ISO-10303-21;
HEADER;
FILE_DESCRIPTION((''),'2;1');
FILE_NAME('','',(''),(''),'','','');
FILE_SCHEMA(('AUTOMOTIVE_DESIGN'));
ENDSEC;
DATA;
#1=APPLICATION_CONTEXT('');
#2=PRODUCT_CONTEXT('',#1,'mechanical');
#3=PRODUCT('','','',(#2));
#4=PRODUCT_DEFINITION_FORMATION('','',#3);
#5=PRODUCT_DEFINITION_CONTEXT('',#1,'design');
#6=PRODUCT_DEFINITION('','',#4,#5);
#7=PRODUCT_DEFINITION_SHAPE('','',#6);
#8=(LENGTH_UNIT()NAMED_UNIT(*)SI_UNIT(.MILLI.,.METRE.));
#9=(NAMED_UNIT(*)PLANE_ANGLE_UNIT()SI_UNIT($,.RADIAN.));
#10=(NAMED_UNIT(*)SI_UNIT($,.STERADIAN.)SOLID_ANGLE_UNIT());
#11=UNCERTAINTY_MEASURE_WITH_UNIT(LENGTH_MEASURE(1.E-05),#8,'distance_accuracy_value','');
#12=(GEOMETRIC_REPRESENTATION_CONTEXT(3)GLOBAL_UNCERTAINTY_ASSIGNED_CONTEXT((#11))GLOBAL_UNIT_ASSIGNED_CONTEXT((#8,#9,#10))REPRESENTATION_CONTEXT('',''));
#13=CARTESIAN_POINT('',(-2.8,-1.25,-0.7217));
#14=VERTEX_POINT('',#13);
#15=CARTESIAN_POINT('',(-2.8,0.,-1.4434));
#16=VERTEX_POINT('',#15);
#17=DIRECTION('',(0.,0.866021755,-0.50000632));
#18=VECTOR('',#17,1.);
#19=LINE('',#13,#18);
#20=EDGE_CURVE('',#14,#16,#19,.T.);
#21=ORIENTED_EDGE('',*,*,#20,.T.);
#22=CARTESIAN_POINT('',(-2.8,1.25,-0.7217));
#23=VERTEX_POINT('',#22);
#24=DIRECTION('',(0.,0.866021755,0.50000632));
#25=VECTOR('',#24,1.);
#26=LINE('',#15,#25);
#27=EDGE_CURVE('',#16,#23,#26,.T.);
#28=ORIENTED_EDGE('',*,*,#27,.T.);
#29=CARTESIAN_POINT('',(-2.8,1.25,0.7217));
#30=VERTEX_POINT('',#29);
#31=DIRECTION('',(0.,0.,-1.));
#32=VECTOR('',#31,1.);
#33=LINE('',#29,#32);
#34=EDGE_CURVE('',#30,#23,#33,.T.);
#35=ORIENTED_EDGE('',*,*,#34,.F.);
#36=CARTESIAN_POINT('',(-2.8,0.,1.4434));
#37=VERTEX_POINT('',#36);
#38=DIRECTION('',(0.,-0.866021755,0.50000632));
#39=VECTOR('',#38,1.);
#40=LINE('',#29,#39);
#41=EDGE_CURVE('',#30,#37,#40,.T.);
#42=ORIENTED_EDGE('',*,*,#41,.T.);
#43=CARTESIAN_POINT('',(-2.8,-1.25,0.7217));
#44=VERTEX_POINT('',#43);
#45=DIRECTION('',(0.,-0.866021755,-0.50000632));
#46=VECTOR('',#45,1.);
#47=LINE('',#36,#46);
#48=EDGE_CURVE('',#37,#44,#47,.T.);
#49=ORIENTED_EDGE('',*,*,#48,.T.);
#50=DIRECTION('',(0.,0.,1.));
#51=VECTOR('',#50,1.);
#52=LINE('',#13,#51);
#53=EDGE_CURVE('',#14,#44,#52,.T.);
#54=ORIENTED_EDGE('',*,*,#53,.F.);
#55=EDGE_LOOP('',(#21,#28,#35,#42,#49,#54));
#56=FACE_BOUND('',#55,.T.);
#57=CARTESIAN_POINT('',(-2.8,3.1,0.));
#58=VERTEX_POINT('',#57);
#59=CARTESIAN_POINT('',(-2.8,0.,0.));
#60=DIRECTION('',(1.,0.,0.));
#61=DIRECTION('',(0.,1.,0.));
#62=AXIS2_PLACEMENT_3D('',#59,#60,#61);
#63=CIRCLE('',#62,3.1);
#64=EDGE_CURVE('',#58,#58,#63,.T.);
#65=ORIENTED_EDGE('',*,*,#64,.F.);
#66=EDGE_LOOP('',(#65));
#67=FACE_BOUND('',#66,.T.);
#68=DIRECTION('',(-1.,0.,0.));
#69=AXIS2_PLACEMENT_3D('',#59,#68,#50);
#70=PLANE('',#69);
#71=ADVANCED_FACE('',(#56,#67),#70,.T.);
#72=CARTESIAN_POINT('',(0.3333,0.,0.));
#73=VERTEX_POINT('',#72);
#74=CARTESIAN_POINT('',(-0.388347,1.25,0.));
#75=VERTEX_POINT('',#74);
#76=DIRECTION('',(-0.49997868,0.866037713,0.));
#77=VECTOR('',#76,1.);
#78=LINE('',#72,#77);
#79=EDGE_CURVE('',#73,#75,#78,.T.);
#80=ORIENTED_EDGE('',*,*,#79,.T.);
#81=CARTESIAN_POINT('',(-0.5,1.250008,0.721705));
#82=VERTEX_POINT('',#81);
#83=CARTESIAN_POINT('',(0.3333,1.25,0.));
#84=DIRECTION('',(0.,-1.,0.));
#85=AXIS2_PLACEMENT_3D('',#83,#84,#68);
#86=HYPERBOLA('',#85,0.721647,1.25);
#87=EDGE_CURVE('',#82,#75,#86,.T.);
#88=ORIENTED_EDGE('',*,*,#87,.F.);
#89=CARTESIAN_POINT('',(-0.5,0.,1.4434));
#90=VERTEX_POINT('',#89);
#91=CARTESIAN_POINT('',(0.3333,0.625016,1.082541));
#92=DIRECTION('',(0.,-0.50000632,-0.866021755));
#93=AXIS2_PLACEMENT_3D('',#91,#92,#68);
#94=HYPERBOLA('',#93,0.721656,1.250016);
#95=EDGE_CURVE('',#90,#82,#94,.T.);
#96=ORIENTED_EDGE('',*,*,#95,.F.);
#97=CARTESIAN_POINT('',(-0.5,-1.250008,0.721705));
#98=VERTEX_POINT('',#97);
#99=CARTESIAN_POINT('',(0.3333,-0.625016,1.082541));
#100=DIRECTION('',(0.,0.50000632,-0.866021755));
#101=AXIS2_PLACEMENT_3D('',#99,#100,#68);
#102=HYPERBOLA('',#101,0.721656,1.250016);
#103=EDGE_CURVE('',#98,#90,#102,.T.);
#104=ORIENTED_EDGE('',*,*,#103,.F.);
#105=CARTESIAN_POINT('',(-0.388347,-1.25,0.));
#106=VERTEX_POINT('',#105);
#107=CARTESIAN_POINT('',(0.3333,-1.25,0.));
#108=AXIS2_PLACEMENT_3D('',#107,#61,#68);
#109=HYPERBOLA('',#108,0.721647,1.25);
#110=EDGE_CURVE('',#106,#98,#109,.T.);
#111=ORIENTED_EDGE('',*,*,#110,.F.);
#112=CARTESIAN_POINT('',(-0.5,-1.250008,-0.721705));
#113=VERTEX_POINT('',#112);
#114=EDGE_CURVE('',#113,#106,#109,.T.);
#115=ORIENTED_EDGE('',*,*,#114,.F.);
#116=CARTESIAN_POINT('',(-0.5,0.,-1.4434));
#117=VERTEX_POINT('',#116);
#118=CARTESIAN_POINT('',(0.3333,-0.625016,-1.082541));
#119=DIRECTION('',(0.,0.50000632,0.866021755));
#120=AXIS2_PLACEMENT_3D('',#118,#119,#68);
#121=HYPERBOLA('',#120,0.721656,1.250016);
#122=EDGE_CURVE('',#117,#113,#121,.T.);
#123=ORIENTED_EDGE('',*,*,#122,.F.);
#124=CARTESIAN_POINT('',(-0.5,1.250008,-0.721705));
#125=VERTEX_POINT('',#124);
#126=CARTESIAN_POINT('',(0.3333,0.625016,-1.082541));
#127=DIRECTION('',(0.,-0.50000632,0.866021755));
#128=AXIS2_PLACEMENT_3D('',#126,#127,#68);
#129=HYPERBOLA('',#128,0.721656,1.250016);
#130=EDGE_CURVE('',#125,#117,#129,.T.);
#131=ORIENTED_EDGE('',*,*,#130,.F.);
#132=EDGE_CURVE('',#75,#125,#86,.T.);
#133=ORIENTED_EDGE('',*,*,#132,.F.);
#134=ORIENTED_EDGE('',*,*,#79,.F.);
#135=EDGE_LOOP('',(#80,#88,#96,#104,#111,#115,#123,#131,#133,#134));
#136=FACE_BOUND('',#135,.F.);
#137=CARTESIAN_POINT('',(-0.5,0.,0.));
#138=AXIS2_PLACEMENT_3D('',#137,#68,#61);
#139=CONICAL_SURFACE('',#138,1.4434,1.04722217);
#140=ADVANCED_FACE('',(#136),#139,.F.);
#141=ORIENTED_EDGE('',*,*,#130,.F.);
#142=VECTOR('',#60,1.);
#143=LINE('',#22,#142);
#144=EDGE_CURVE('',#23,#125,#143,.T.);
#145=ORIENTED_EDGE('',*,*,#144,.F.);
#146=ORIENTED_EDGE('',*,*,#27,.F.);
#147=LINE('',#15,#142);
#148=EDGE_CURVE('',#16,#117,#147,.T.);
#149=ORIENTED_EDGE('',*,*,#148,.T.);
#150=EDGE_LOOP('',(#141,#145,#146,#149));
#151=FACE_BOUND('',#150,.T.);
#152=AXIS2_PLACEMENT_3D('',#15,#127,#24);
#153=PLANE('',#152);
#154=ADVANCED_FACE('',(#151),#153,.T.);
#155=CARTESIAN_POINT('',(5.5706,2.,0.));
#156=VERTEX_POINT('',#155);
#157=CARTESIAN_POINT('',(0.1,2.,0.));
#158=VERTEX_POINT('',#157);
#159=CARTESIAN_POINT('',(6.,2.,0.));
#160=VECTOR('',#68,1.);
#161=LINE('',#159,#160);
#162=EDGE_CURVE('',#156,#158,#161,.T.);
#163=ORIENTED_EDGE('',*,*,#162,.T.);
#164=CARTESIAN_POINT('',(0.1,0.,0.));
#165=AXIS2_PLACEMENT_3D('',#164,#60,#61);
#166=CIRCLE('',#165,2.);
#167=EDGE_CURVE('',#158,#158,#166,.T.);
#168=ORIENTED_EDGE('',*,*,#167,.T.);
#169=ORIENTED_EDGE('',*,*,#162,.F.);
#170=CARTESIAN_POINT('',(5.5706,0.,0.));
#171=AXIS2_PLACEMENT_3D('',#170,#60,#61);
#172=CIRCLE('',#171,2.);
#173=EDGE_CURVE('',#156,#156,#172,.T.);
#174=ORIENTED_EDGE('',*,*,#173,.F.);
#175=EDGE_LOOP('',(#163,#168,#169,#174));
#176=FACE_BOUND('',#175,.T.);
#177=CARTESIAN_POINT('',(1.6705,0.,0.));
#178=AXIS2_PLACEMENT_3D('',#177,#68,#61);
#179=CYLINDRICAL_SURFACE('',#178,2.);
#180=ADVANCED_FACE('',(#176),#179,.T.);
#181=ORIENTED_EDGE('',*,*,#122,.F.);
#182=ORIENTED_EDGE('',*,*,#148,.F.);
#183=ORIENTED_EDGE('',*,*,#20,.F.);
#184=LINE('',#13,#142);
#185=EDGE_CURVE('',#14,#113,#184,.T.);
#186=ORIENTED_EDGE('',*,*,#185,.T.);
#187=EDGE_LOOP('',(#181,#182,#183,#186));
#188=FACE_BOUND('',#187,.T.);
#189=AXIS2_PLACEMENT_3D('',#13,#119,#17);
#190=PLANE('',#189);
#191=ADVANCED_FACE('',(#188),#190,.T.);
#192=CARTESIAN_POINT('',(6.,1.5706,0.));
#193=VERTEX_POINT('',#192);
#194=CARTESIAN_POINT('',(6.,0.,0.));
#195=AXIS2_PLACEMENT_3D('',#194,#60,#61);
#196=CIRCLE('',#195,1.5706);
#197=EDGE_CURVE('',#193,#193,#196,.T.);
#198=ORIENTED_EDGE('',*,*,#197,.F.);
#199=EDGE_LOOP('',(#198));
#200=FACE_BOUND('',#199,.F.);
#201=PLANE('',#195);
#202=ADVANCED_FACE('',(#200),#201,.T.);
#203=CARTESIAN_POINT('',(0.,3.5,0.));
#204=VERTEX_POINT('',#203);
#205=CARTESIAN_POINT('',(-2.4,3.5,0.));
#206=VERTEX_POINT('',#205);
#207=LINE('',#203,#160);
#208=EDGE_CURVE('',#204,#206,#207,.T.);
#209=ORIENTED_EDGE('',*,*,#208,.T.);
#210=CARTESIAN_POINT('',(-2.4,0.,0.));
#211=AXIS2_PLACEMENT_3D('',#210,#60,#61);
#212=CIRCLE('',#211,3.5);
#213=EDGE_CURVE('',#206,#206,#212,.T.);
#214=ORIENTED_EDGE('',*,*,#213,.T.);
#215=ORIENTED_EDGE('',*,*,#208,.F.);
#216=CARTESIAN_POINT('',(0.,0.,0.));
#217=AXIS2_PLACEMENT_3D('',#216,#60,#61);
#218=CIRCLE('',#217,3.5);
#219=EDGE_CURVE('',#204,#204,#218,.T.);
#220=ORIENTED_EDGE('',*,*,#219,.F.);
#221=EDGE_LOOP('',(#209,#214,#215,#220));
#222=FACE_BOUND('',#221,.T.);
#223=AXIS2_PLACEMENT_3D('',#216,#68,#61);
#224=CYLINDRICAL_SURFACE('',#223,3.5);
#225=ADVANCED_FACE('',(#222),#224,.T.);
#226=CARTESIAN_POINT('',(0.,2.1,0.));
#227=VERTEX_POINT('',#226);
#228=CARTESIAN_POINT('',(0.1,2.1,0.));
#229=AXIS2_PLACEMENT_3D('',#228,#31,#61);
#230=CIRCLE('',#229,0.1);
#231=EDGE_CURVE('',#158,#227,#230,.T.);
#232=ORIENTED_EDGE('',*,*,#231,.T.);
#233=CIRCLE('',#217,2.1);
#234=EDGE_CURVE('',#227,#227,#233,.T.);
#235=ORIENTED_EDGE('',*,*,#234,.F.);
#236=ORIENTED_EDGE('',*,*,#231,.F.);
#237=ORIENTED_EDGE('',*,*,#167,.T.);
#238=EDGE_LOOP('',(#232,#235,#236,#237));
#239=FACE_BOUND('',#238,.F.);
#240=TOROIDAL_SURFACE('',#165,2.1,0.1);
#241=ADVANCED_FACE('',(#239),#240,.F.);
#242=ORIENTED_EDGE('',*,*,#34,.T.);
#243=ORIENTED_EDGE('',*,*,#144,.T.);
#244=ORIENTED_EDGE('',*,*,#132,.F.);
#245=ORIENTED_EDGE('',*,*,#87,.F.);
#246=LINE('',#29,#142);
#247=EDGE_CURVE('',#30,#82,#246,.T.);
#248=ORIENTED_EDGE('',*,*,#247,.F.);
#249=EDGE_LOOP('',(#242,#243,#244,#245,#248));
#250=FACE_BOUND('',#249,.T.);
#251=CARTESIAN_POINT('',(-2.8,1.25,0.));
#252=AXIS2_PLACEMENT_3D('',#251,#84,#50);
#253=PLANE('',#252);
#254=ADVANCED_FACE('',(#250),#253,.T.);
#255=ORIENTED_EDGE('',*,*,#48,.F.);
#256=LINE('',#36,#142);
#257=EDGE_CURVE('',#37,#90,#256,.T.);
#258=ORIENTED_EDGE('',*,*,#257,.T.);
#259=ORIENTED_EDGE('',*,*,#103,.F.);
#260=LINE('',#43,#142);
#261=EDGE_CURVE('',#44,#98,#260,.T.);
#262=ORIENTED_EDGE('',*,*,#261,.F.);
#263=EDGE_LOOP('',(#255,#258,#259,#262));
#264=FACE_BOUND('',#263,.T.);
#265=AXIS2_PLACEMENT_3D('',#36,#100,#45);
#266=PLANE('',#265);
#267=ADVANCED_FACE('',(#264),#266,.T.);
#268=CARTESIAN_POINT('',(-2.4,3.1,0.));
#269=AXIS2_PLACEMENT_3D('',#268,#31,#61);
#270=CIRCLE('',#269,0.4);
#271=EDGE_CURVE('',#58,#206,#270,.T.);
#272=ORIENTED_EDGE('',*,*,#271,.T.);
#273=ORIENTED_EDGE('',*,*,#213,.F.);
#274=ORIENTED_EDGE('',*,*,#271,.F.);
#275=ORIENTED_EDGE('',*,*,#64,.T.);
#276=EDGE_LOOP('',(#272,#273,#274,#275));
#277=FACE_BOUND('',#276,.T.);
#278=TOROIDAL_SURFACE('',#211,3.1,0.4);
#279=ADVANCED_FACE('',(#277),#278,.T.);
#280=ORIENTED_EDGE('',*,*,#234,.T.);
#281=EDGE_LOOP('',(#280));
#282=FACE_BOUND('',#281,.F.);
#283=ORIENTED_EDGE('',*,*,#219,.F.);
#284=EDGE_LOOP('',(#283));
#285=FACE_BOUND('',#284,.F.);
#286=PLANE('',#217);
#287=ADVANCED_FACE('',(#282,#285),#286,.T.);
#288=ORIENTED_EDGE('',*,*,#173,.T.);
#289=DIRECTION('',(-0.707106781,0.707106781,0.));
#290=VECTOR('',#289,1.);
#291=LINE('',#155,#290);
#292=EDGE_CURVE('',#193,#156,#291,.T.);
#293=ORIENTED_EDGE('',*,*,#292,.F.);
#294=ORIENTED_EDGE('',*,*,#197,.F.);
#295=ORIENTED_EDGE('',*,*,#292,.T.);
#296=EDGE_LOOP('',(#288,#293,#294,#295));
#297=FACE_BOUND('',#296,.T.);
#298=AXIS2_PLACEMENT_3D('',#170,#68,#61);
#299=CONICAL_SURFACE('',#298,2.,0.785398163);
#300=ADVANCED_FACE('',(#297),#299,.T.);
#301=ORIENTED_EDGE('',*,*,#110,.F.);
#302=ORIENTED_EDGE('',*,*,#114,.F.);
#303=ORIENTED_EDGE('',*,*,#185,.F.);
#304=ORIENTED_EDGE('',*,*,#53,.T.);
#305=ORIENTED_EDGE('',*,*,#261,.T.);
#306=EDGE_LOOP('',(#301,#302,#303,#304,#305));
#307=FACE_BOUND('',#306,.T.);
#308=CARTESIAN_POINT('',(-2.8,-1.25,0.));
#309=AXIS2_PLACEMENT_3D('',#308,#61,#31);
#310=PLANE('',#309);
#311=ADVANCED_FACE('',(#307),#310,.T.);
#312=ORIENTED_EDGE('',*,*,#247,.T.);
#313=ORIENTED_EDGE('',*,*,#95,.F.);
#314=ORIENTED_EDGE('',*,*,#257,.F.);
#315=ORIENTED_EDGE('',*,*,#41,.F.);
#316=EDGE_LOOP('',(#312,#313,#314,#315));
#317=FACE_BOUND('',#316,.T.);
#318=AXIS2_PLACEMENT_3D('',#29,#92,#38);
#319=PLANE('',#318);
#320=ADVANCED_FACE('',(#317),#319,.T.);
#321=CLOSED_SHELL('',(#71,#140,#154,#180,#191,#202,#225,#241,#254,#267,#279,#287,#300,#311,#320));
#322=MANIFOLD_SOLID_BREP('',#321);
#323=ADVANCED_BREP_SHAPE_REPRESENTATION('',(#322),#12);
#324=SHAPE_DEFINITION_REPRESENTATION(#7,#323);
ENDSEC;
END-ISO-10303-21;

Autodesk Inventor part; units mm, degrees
ref_plane "YZ Plane" through (0, 0, 0) normal (1, 0, 0) x (0, 1, 0)
ref_plane "XZ Plane" through (0, 0, 0) normal (0, 1, 0) x (-1, 0, 0)
sketch "Skizze1" plane through (0, 0, 0) normal (0, 0, 1) x (1, 0, 0)
  line L0 (0.3333, 0) -> (6, 0)
  line L1 (6, 0) -> (6, 2)
  line L2 (6, 2) -> (2.1, 2)
  line L3 (2.1, 2) -> (1.6705, 2)
  line L4 (1.6705, 2) -> (0, 2)
  line L5 (0, 2) -> (0, 3.5)
  line L6 (0, 3.5) -> (-2.8, 3.5)
  line L7 (-2.8, 3.5) -> (-2.8, 1.4434)
  line L8 (-2.8, 1.4434) -> (-0.5, 1.4434)
  line L9 (-0.5, 1.4434) -> (0.3333, 0)
  line L10 (-4.56, 0) -> (7.76, 0) projected
  line L11 (0, -0.7) -> (0, 4.2) projected
  line L12 (2.1, 2) -> (0, 2) construction
  dimension "d1" = 3.9
  dimension "d2" = 0.4295
  dimension "d3" = 2.8
  dimension "d4" = 2.3
  dimension "d5" = 60
  dimension "d6" = 4
  dimension "d7" = 4
  dimension "d8" = 2.8868
  dimension "d9" = 7
  dimension "d26" = 6
revolve "Körper" add sketch "Skizze1" angle 360 about axis through (0.3333, 0, 0) along (1, 0, 0) contours L9 L11 L4 L3 L2 L1 L0 | L9 L8 L7 L6 L5 L11
sketch "Skizze2" plane through (-2.8, 0, 0) normal (-1, 0, 0) x (0, 0, 1)
  circle A0 centre (0, 0) radius 1.4434 projected
  line L0 (0, -4.9) -> (0, 4.9) projected
  line L1 (-4.9, 0) -> (4.9, 0) projected
  line L2 (1.4434, 0) -> (0.7217, -1.25)
  line L3 (0.7217, -1.25) -> (-0.7217, -1.25)
  line L4 (-0.7217, -1.25) -> (-1.4434, 0)
  line L5 (-1.4434, 0) -> (-0.7217, 1.25)
  line L6 (-0.7217, 1.25) -> (0.7217, 1.25)
  line L7 (0.7217, 1.25) -> (1.4434, 0)
extrude "Loch" add sketch "Skizze2" against normal up to next contours L7 A0 | A0 L2 | L6 L0 A0 | A0 L0 L3 | L0 L6 A0 | A0 L3 L0 | L4 A0 | A0 L5
fillet "Rundung1" radius 0.4 1 edges at (-2.8, -3.5, 0)
thread "Gewinde" size "M4x0.7" class "6g" standard "ISO Metric profile" length 3.9
chamfer "Fase1" distance 0.4294 distance2 0.4294 1 edges at (6, -2, 0) measured on face at (6, 0.556, 0.0273)
ref_plane "Work Plane1" through (29, 0, 0) normal (0, -1, 0) x (1, 0, 0)
fillet "Fillet2" radius 0.1 1 edges at (0, -2, 0)
equation "\"d1\" = GEL"
equation "\"d3\" = KOH"
equation "\"d4\" = INTI"
equation "\"d6\" = GD"
equation "\"d7\" = BDM"
equation "\"d8\" = 1.1547 * SW"
equation "\"d9\" = KOD"
equation "\"d26\" = NLG"
equation "\"d30\" = R"
equation "\"d17\" = RR"
equation "\"d13\" = GEL"
equation "\"d15\" = -0.5 * SPD + 0.5 * GD"
equation "\"d16\" = GUL"
equation "\"GD\" = NND"
equation "\"NLG\" = 6"
equation "\"GEL\" = 3.9"
equation "\"KOD\" = 7"
equation "\"KOH\" = 2.8"
equation "\"INTI\" = 2.3"
equation "\"GAL\" = 0.61345 * PTC"
equation "\"GUL\" = 0.61345 * PTC"
equation "\"BDM\" = NND"
equation "\"SW\" = 2.5"
equation "\"RR\" = 0.4"
equation "\"SPD\" = NND - 1.2269 * PTC"
equation "\"R\" = 0.1"
equation "\"TOA\" = 30deg"
equation "\"GD1\" = THREADDIA - 1.2269 * PTC"
equation "\"THREADDIA\" = 4"
equation "\"FAWI\" = 45deg"
equation "\"ANG\" = 120deg"
equation "\"PTC\" = 0.7"
equation "\"NND\" = 4"
equation "\"E0\" = 1.155 * SW"
properties part number "DIN 7984 - M4 x 6" material "Stahl, weich"
